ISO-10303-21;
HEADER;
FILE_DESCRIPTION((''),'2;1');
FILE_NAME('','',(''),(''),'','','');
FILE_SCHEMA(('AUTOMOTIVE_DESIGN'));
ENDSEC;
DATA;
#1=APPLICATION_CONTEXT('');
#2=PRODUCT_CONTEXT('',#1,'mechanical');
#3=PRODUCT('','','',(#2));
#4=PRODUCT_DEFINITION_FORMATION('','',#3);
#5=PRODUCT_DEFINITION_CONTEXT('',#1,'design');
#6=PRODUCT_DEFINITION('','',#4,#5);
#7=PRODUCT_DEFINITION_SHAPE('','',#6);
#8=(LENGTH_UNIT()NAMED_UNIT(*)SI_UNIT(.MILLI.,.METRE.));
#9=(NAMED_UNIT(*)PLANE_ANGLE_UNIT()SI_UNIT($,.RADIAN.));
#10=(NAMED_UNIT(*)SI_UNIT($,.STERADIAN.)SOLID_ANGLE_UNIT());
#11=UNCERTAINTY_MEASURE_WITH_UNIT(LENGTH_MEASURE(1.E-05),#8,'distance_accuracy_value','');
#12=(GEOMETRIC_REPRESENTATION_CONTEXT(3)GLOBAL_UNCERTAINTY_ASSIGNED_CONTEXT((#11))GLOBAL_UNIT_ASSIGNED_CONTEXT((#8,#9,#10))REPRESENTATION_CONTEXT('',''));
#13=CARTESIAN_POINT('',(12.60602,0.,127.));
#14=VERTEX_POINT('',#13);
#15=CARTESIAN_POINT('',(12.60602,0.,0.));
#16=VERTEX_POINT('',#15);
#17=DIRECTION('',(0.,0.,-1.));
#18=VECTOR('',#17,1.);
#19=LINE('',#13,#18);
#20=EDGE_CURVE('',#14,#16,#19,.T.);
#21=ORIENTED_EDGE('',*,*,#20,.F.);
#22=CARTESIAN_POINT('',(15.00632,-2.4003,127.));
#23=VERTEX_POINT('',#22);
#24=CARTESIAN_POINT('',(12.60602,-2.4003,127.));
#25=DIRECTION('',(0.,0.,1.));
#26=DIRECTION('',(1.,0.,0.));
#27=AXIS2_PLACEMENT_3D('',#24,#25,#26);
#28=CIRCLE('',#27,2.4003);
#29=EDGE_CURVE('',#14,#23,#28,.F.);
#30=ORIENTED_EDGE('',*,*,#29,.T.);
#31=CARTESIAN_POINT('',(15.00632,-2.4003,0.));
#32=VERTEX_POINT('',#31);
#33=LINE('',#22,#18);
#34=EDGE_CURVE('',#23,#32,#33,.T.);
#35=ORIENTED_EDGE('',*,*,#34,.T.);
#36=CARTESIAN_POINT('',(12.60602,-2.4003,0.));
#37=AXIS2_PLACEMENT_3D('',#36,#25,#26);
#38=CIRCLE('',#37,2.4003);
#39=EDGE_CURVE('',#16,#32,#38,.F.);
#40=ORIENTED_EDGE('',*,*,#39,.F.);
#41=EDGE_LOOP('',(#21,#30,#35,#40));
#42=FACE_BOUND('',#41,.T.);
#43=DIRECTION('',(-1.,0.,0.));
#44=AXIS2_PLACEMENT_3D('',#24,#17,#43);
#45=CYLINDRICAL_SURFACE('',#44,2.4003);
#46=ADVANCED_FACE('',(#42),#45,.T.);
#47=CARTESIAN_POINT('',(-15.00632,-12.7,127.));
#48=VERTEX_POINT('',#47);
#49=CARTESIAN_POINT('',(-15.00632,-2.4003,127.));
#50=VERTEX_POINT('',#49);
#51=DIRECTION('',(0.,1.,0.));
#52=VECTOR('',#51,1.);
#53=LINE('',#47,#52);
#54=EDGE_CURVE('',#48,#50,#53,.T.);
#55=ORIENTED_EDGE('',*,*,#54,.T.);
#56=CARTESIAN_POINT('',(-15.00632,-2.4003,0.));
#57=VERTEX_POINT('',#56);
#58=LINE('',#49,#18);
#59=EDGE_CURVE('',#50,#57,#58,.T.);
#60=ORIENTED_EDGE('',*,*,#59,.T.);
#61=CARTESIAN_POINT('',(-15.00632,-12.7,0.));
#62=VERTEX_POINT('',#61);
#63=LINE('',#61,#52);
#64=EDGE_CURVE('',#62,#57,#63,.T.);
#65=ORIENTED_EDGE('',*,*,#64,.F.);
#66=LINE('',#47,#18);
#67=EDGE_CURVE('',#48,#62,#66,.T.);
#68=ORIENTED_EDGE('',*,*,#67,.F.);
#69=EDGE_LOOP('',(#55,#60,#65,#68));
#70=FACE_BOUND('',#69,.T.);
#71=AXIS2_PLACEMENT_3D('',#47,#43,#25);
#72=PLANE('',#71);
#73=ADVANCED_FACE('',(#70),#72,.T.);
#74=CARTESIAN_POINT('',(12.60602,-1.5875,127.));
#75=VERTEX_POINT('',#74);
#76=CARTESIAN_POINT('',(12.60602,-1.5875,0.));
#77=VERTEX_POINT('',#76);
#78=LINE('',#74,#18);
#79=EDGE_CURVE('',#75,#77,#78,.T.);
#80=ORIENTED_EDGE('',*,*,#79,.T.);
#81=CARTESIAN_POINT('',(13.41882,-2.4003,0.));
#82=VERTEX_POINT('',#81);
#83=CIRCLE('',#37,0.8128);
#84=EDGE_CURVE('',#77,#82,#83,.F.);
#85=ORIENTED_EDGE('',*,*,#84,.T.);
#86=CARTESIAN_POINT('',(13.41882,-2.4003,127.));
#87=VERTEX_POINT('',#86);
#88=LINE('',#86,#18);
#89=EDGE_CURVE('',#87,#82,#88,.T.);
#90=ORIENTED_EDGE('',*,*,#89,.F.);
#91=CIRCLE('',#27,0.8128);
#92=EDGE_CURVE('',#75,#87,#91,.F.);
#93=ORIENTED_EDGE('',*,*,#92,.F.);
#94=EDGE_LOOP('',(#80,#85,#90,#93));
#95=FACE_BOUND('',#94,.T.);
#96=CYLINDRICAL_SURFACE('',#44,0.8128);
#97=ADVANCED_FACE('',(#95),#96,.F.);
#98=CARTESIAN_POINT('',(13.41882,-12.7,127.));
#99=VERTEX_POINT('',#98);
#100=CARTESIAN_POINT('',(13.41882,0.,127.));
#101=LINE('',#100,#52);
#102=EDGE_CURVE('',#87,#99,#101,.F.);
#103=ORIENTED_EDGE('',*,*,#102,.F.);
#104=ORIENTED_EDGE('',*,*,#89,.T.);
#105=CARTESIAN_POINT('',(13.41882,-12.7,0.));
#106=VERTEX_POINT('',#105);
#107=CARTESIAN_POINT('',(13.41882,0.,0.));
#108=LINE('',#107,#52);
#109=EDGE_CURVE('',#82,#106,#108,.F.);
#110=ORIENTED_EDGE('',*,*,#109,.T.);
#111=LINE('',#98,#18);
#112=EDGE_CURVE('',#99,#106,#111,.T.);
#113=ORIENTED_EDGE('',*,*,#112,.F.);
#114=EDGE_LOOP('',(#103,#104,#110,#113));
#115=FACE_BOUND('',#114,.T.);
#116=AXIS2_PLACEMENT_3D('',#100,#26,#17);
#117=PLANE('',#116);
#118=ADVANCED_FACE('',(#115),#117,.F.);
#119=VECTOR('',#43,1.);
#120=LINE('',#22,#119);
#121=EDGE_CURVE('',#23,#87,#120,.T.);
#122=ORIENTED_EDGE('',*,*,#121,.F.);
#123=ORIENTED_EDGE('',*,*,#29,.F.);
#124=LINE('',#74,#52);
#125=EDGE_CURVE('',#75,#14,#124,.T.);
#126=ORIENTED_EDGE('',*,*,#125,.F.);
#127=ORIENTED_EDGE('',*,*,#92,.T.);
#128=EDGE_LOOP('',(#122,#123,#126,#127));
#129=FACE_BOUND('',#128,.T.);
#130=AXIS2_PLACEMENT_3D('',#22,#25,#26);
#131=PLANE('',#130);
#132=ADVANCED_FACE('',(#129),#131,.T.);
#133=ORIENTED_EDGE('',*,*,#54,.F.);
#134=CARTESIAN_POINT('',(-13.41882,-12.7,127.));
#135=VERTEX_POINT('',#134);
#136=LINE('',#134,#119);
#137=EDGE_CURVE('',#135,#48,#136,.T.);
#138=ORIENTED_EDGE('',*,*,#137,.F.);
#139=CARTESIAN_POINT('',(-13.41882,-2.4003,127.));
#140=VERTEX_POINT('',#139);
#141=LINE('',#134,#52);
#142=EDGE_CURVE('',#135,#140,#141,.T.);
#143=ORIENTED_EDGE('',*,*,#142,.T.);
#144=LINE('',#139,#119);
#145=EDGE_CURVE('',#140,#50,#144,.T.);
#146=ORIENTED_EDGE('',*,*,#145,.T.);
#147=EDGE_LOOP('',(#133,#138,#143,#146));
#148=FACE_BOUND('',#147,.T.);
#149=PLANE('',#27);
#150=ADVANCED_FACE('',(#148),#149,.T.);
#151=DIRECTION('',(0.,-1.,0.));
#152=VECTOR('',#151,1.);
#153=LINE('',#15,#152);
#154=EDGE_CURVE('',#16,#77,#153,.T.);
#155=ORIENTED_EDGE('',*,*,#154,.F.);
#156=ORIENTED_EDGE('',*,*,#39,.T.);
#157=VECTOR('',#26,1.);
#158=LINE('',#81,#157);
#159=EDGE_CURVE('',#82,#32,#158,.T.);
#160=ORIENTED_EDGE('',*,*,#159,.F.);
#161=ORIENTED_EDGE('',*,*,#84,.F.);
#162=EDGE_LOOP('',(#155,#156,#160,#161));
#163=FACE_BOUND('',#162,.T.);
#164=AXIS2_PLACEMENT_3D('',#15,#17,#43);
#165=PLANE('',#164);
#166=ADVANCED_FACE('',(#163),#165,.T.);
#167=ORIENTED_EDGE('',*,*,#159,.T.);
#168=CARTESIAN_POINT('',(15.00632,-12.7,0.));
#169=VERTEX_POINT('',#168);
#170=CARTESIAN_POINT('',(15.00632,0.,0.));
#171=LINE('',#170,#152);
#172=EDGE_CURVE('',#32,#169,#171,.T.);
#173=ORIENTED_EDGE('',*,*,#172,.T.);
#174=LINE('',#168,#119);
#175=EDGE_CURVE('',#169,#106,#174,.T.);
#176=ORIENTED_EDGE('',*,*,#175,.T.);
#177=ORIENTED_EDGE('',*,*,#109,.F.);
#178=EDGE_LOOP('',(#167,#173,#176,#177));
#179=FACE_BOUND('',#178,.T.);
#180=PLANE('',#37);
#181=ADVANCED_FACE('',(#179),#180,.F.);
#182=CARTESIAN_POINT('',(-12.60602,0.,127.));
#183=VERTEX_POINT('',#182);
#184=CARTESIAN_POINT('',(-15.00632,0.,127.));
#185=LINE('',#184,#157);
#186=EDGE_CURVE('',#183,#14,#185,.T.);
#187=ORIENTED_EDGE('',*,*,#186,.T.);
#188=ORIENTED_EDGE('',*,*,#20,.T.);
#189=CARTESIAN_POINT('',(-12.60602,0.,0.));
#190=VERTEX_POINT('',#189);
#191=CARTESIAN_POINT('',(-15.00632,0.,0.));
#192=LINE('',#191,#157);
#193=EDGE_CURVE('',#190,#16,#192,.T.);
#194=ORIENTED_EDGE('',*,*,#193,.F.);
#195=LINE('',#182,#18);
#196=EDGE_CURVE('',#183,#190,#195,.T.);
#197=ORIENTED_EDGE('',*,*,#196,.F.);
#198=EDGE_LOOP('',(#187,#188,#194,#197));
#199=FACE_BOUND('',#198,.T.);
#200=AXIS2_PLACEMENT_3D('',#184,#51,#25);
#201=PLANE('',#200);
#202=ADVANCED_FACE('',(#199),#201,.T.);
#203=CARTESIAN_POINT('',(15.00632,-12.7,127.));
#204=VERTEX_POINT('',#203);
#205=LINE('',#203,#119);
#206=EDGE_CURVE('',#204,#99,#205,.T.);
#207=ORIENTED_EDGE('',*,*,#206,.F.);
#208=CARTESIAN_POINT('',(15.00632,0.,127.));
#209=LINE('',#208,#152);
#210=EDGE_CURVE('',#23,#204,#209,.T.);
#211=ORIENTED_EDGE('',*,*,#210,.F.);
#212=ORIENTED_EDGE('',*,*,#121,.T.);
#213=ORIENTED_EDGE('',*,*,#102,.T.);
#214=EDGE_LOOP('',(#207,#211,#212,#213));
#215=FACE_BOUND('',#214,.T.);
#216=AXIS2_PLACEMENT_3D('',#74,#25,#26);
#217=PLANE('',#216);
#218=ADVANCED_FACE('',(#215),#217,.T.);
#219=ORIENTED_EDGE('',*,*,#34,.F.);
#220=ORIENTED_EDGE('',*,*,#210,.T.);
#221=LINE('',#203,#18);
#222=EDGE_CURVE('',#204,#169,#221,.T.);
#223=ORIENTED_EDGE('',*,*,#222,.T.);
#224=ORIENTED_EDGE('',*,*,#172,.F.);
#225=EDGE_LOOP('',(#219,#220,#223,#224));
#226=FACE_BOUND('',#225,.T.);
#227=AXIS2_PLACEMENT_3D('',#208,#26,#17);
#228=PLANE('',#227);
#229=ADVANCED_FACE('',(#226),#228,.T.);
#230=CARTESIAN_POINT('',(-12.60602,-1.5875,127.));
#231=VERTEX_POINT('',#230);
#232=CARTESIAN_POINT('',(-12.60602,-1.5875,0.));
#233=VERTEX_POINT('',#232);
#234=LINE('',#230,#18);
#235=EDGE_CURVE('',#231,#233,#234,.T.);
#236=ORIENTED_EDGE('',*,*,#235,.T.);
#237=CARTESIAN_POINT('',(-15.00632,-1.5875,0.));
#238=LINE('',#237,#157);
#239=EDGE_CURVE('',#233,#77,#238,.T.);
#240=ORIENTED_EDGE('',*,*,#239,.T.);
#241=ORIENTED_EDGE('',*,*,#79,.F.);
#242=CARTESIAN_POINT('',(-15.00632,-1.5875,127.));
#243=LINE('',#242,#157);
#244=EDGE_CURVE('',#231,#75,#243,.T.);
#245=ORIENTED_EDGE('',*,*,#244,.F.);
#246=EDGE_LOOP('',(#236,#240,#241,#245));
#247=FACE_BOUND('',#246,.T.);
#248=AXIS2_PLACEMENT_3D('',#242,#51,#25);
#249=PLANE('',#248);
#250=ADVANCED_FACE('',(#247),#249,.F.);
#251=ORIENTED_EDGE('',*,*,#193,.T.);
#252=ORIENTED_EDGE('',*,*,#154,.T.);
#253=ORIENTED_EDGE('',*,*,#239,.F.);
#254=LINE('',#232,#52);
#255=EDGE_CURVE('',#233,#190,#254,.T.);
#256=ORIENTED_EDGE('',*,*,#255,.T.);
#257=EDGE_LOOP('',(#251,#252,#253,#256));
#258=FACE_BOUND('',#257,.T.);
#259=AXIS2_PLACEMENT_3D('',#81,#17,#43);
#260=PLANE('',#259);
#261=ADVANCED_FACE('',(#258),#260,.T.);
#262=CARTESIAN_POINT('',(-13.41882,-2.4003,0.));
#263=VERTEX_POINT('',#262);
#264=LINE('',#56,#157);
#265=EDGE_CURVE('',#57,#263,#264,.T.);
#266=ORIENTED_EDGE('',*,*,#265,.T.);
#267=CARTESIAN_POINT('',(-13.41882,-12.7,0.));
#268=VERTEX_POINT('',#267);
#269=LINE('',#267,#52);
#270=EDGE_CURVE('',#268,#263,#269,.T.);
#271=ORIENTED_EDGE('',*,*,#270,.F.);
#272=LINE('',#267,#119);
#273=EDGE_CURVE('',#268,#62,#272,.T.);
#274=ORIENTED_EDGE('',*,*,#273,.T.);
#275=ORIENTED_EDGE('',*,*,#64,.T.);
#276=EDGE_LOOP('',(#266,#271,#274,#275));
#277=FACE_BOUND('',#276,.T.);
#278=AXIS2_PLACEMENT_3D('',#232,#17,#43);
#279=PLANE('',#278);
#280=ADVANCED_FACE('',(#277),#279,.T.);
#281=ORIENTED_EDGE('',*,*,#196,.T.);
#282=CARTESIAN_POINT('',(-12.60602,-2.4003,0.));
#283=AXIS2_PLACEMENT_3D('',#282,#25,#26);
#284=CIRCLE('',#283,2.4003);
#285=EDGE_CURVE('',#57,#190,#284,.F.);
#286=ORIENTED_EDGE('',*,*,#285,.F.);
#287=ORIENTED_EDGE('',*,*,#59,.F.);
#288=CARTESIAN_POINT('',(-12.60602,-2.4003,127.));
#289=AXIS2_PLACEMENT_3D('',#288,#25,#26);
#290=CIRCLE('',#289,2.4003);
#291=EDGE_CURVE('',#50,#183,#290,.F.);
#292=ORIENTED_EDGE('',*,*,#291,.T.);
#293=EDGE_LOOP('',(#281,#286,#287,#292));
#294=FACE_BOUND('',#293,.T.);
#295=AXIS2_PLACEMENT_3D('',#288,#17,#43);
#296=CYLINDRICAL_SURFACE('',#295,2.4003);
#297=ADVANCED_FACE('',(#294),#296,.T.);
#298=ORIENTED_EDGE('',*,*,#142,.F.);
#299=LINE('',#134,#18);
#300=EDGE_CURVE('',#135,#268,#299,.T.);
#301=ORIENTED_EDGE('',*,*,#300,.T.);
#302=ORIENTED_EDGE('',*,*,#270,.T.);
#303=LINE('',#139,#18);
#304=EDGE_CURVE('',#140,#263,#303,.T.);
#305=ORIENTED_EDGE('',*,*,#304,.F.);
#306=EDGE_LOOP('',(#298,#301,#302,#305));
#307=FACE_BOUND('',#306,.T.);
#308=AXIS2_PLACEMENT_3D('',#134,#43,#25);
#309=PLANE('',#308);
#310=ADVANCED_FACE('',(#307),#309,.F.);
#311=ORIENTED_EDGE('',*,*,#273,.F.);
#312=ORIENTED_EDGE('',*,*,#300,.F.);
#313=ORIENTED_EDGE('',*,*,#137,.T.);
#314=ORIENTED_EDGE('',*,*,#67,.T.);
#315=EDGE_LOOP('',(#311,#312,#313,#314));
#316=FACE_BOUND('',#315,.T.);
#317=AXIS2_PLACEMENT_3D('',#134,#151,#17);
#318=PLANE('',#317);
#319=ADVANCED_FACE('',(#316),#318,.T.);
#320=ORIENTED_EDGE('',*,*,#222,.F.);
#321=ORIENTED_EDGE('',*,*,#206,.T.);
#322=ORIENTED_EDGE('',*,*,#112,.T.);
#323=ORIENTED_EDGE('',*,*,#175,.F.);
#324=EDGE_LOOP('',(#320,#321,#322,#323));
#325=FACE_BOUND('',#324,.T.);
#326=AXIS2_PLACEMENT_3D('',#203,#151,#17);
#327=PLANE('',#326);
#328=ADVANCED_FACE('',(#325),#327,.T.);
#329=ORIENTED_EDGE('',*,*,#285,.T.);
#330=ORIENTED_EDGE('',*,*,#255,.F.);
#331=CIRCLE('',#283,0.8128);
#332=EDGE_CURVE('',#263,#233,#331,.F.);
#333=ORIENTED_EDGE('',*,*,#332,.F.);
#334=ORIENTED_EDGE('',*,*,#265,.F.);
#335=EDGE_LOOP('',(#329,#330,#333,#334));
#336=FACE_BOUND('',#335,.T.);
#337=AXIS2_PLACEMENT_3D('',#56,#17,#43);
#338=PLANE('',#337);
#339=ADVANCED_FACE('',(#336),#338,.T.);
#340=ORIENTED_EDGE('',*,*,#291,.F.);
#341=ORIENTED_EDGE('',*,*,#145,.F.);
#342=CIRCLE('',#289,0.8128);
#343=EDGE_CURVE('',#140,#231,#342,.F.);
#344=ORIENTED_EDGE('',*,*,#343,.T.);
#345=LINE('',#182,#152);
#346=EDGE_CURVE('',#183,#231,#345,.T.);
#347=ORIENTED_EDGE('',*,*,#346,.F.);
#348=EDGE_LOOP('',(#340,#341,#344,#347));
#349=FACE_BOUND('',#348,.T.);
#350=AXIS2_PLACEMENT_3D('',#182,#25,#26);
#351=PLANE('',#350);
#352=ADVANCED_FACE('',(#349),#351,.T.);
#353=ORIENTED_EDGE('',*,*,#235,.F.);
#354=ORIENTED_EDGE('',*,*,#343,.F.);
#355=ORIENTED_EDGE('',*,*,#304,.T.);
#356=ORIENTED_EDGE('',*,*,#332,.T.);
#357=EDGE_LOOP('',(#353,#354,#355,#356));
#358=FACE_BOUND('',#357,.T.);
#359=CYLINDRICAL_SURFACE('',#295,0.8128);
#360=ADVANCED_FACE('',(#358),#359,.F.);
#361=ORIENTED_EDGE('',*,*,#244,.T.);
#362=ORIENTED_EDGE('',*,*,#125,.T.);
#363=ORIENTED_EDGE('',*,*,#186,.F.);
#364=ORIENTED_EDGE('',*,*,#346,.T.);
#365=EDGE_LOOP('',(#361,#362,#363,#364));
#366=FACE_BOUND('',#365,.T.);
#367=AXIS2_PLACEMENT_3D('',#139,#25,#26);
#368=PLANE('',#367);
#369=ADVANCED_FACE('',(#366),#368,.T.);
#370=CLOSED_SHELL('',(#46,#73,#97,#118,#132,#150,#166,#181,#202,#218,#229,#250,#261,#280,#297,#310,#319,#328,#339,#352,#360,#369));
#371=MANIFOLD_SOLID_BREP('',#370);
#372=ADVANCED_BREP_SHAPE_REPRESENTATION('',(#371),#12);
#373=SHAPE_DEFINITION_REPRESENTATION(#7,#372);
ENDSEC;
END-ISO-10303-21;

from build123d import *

# Parameters (mm, degrees)
BASE_FLANGE1_DEPTH = 127


# Sheet-metal steps are written as plain solids
with BuildPart() as part:
    # Sketch1 → Base-Flange1 (new body)
    with BuildSketch(Plane.XY):
        with BuildLine():
            Line((-15.00632, -12.7), (-15.00632, -2.4003))
            ThreePointArc((-15.00632, -2.4003), (-14.303288407, -0.703031593), (-12.60602, 0))
            Line((-12.60602, 0), (12.60602, 0))
            ThreePointArc((12.60602, 0), (14.303288407, -0.703031593), (15.00632, -2.4003))
            Line((15.00632, -2.4003), (15.00632, -12.7))
            Line((15.00632, -12.7), (13.41882, -12.7))
            Line((13.41882, -12.7), (13.41882, -2.4003))
            ThreePointArc((13.41882, -2.4003), (13.180756392, -1.825563608), (12.60602, -1.5875))
            Line((12.60602, -1.5875), (-12.60602, -1.5875))
            ThreePointArc((-12.60602, -1.5875), (-13.180756392, -1.825563608), (-13.41882, -2.4003))
            Line((-13.41882, -2.4003), (-13.41882, -12.7))
            Line((-13.41882, -12.7), (-15.00632, -12.7))
        make_face()
    extrude(amount=BASE_FLANGE1_DEPTH)


solid = part.part
